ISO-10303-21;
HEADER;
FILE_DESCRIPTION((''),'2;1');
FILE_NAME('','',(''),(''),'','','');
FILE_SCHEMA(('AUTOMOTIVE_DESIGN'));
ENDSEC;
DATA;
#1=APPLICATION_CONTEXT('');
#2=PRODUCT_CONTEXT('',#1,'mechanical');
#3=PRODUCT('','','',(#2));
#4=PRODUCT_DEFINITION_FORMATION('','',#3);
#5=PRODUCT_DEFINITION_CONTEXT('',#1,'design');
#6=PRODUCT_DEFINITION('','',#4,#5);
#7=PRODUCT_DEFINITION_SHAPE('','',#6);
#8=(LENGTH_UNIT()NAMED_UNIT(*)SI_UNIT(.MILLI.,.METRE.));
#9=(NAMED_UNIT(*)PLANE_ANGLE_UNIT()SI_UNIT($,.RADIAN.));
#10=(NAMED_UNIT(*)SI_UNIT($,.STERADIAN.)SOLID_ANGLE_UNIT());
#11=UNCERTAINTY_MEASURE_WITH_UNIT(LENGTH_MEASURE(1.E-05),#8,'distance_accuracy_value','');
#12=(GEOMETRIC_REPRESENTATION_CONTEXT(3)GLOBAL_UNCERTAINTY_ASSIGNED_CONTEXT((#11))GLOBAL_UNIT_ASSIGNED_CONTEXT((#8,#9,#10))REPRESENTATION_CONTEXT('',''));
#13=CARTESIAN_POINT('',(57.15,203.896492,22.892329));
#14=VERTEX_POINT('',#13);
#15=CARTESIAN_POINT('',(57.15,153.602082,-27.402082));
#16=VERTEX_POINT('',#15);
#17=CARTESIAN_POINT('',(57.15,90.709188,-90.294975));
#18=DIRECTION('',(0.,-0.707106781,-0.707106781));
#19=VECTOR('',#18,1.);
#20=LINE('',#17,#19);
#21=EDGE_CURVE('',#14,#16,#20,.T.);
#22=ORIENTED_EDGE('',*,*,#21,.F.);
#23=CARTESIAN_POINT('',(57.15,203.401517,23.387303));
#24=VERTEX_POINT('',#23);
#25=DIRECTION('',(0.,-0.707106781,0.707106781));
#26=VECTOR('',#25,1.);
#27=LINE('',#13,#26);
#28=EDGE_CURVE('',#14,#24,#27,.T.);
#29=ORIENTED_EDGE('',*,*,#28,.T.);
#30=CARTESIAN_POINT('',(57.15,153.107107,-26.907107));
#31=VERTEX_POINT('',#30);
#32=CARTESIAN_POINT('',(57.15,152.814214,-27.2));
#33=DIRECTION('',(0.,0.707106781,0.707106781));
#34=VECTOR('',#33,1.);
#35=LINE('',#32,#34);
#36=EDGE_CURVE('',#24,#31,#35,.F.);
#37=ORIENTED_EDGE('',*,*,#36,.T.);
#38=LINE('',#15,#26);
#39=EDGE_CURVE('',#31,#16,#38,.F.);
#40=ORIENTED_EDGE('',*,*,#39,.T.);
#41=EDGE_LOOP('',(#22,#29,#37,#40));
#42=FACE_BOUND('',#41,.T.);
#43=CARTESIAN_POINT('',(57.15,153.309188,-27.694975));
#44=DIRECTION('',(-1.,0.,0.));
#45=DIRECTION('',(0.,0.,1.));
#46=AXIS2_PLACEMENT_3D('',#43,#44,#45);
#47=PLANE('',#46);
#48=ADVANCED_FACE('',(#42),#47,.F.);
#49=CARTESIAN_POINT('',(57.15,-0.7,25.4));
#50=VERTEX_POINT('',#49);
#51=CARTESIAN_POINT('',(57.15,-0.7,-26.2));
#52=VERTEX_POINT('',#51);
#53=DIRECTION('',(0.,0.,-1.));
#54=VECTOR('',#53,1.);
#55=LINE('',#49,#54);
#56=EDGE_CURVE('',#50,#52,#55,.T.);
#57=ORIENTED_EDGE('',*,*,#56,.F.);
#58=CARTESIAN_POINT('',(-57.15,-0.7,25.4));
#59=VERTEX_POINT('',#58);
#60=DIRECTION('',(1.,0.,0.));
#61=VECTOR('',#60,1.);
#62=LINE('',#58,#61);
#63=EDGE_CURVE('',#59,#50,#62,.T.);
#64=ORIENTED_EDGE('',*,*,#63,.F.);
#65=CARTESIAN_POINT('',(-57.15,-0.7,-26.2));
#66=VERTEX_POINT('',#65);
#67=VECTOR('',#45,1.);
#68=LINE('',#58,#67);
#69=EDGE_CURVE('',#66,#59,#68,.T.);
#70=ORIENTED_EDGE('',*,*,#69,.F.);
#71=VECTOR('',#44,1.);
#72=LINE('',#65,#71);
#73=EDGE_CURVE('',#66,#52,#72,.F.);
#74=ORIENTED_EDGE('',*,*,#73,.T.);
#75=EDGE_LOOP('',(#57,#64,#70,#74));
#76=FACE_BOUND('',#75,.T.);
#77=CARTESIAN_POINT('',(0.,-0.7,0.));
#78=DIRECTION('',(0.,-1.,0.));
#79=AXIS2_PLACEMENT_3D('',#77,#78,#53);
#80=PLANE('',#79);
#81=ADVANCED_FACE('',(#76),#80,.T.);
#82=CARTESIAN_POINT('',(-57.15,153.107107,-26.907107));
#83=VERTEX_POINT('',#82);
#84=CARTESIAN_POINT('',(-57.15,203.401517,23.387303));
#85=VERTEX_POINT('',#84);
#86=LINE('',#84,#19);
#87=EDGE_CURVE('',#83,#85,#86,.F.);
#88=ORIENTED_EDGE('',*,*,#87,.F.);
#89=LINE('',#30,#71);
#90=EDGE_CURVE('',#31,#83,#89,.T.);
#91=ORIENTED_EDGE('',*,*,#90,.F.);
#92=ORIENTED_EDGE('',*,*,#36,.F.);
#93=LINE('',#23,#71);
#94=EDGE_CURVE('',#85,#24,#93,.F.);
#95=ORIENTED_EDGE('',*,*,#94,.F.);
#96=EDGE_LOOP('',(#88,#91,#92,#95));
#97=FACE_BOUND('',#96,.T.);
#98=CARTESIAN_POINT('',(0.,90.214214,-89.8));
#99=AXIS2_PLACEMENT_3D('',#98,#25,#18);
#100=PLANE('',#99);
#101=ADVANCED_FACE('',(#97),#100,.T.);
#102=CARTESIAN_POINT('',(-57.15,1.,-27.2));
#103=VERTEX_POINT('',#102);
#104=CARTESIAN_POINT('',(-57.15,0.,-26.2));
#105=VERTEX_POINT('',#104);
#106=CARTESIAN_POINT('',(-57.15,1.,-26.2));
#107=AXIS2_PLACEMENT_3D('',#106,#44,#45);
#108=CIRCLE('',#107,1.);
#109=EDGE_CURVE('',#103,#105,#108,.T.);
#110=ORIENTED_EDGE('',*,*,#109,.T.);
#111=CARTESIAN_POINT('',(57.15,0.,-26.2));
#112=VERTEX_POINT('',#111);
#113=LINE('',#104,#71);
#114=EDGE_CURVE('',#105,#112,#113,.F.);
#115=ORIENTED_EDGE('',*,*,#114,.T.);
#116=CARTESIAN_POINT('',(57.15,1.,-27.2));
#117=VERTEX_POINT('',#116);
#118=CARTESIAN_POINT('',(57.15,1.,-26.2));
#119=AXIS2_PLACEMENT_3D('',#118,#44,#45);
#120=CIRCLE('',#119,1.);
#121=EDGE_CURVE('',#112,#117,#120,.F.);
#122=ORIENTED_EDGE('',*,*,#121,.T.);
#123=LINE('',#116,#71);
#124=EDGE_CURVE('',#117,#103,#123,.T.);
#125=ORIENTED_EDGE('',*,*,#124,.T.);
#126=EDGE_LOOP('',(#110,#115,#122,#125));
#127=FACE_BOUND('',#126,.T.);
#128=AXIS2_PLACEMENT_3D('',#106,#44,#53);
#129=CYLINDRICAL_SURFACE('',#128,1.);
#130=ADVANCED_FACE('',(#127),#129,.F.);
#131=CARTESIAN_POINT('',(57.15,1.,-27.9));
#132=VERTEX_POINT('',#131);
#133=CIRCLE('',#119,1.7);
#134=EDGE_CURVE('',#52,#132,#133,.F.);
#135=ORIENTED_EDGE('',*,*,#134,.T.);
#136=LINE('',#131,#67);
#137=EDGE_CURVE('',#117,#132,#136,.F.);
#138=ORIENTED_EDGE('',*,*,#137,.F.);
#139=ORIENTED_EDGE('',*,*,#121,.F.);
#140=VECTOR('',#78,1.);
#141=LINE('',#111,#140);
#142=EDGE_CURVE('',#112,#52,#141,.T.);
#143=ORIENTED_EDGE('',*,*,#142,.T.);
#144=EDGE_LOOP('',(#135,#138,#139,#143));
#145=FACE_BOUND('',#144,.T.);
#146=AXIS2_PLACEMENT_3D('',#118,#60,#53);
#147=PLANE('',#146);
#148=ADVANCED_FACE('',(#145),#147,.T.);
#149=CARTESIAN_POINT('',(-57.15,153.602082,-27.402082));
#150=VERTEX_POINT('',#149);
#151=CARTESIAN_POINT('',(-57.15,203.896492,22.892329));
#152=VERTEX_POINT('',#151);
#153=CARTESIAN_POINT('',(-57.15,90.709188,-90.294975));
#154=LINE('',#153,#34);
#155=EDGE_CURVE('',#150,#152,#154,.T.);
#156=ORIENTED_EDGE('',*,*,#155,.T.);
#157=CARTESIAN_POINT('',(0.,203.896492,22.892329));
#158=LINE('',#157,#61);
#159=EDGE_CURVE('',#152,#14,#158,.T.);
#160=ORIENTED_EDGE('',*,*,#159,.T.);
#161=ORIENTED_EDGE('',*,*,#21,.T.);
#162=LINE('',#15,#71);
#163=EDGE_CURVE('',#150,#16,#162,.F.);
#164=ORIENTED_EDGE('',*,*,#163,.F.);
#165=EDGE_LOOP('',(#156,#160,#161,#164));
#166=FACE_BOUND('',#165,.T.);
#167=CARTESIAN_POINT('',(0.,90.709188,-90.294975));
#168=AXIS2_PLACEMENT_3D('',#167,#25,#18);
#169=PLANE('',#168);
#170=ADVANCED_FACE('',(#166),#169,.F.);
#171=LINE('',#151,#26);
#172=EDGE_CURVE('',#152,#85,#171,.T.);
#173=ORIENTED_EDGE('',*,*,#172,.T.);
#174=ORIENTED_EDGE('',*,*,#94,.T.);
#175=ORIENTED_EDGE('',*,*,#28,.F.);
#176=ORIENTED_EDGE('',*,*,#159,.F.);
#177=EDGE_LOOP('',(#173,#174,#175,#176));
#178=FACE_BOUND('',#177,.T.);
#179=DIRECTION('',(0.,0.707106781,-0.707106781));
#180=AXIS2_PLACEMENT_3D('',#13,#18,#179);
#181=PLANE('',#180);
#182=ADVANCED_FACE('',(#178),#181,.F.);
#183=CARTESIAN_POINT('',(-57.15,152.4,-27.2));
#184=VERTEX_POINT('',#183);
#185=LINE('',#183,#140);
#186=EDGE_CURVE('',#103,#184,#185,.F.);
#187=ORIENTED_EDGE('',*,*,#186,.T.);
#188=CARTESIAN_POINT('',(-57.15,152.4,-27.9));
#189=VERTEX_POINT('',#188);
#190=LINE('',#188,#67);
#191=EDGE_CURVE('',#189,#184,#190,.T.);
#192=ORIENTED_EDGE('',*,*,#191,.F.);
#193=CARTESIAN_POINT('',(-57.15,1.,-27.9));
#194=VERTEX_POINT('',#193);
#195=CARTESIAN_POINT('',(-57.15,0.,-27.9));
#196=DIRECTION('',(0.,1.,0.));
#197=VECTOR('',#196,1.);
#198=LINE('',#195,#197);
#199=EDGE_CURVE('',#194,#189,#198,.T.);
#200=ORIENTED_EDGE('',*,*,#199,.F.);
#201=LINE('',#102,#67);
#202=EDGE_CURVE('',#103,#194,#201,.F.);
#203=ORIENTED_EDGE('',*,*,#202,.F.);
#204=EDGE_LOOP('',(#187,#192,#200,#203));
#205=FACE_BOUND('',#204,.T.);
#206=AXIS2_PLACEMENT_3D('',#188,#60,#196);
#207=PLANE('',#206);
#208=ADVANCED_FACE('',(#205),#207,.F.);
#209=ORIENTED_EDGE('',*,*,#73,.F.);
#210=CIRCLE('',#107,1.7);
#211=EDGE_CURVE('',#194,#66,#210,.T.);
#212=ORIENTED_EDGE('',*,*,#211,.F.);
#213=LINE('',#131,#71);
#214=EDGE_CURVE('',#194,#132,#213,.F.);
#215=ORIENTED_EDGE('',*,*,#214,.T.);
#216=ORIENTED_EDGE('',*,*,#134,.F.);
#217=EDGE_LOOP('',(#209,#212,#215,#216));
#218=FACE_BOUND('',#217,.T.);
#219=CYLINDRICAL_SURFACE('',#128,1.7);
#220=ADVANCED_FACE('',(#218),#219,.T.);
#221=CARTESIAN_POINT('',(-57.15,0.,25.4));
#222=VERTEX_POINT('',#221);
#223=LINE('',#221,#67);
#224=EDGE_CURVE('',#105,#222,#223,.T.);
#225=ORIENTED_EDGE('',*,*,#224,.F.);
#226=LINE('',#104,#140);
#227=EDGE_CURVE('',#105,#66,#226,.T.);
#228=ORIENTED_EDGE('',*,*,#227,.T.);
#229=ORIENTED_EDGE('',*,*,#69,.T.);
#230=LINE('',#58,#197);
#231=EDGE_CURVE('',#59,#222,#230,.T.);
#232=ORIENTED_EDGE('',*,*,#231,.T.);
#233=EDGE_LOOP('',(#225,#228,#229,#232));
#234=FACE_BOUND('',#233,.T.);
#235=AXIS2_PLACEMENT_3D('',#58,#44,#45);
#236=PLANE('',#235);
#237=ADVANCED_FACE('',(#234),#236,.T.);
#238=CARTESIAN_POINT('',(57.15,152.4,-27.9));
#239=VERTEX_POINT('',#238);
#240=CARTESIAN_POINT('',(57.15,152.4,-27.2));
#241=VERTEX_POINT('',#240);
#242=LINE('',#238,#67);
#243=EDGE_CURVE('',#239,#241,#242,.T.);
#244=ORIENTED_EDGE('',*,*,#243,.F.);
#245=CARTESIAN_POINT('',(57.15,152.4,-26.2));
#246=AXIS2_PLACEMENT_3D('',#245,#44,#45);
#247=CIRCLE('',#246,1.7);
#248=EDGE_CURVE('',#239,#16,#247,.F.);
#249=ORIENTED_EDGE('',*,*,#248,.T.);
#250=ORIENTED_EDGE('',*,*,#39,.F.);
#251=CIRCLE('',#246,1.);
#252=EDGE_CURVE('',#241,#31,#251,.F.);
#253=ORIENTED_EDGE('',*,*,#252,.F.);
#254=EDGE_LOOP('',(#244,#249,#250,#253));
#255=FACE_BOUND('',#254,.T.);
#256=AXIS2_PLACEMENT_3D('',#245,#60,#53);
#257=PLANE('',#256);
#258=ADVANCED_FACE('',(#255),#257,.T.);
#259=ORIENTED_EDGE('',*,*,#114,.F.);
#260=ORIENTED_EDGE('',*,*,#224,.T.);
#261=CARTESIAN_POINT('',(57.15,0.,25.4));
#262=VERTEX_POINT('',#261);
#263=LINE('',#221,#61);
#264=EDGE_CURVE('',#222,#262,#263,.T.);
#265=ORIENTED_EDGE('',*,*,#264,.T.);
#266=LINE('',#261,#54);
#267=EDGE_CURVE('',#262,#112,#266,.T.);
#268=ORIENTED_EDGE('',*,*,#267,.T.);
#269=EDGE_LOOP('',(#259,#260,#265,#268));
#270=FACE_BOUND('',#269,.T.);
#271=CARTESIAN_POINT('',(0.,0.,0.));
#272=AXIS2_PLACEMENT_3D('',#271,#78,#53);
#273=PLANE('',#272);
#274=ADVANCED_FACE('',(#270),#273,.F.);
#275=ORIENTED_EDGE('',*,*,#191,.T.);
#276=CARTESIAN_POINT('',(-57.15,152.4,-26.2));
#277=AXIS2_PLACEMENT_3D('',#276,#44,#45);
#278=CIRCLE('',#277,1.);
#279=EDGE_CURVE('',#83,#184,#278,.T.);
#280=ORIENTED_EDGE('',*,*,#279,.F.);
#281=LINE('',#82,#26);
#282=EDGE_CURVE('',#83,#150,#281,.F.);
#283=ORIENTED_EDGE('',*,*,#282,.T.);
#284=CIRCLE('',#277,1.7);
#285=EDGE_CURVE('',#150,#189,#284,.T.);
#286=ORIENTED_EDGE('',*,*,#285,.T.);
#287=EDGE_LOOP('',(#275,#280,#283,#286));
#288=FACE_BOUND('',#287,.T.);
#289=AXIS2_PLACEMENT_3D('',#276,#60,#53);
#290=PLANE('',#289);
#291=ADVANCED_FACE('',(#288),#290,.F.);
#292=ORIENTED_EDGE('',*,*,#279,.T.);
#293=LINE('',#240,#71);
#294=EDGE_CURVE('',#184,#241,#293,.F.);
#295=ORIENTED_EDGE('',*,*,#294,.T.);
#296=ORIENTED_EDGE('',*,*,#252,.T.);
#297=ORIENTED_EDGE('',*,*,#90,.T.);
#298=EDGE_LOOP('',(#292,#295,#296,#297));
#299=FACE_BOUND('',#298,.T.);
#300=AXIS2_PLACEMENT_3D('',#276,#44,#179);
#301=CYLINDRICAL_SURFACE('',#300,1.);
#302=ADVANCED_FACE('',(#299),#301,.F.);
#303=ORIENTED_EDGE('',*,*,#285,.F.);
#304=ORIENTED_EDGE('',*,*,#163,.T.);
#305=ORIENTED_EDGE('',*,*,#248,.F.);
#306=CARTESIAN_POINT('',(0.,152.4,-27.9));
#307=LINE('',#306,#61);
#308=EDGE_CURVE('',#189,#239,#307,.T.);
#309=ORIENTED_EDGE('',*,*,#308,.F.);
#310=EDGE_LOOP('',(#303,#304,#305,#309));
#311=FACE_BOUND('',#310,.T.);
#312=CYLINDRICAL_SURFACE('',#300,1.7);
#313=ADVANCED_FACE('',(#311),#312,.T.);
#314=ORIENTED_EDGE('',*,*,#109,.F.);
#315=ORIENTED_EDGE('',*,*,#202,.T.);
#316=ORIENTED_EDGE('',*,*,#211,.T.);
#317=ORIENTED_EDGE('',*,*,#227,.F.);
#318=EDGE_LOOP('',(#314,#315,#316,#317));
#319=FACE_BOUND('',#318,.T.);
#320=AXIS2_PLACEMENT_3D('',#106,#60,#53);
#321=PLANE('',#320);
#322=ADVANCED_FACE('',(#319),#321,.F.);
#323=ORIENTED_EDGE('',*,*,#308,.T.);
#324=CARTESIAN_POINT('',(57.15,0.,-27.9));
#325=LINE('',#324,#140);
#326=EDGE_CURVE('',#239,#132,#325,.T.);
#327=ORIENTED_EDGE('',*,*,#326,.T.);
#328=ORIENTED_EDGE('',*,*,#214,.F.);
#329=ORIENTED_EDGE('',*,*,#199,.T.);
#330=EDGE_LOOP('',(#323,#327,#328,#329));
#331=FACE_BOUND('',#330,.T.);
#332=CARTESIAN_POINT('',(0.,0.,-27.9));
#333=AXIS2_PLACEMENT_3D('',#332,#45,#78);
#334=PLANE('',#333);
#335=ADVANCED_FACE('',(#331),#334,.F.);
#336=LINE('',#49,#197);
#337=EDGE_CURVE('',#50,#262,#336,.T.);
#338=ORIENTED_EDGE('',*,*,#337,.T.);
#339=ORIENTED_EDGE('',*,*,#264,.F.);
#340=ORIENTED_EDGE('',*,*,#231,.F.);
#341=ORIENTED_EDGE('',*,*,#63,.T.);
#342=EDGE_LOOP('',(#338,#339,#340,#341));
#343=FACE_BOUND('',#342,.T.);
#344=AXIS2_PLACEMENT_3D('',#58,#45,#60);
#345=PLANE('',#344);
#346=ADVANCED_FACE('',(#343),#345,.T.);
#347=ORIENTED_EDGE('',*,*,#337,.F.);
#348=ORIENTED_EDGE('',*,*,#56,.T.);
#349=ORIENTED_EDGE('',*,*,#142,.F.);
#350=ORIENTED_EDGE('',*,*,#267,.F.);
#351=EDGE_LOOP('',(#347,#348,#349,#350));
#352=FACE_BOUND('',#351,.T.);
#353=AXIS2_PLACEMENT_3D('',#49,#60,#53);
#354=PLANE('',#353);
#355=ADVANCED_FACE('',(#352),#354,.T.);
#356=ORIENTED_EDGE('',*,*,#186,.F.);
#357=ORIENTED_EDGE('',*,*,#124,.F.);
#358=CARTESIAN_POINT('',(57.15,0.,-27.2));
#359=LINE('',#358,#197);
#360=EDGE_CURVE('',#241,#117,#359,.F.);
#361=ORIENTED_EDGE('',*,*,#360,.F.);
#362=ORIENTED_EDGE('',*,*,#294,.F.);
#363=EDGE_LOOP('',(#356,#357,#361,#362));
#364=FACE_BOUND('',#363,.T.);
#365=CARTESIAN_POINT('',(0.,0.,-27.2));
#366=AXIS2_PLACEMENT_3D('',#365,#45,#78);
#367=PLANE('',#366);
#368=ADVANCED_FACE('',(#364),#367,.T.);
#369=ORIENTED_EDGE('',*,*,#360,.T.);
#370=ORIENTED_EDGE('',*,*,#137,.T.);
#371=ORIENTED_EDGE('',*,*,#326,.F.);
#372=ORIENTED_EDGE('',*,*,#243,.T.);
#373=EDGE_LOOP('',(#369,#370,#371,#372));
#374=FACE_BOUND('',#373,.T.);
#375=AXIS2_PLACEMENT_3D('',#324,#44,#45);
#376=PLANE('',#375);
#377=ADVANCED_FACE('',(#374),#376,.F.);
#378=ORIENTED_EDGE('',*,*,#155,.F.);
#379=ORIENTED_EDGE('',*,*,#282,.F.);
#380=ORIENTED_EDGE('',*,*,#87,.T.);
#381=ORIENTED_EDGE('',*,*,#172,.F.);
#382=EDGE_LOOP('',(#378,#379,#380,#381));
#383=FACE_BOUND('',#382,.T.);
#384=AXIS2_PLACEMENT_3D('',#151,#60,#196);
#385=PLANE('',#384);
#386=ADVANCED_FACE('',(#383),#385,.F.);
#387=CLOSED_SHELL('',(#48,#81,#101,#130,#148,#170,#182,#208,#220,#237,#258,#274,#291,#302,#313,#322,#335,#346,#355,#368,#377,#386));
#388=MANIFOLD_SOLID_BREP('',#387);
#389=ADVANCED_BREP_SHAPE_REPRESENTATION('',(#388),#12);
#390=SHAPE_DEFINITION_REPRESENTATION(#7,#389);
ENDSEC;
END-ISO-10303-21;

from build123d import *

# Parameters (mm, degrees)
SKETCH1_W          = 114.3
SKETCH1_H          = 50.8
BASE_FLANGE1_DEPTH = 0.7
EDGE_FLANGE1_DEPTH = 114.3
EDGE_FLANGE2_DEPTH = 114.3


# Sheet-metal steps are written as plain solids
with BuildPart() as part:
    # Sketch1 → Base-Flange1 (new body)
    with BuildSketch(Plane(origin=(0, 0, 0), x_dir=(1, 0, 0), z_dir=(0, 1, 0))):
        Rectangle(SKETCH1_W, SKETCH1_H)
    extrude(amount=-BASE_FLANGE1_DEPTH)

    # Edge-Flange1 section (across the edge) → Edge-Flange1 (add)
    with BuildSketch(Plane(origin=(57.15, 0, -27.2), x_dir=(0, 0, 1), z_dir=(-1, 0, 0))):
        with BuildLine():
            Line((-0.7, 1), (-0.7, 152.4))
            Line((-0.7, 152.4), (0, 152.4))
            Line((0, 152.4), (0, 1))
            ThreePointArc((0, 1), (0.292893219, 0.292893219), (1, 0))
            Line((1, 0), (1.8, 0))
            Line((1.8, 0), (1.8, -0.7))
            Line((1.8, -0.7), (1, -0.7))
            ThreePointArc((1, -0.7), (-0.202081528, -0.202081528), (-0.7, 1))
        make_face()
    extrude(amount=EDGE_FLANGE1_DEPTH)

    # Edge-Flange2 section (across the edge) → Edge-Flange2 (add)
    with BuildSketch(Plane(origin=(57.15, 152.814213562, -27.2), x_dir=(0, -0.7071067811865414, 0.7071067811865537), z_dir=(-1, 0, 0))):
        with BuildLine():
            Line((-0.7, 0.414213562), (-0.7, 71.541250506))
            Line((-0.7, 71.541250506), (0, 71.541250506))
            Line((0, 71.541250506), (0, 0.414213562))
            ThreePointArc((0, 0.414213562), (0.076120467, 0.03153013), (0.292893219, -0.292893219))
            Line((0.292893219, -0.292893219), (-0.202081528, -0.787867966))
            ThreePointArc((-0.202081528, -0.787867966), (-0.570595205, -0.236348273), (-0.7, 0.414213562))
        make_face()
    extrude(amount=EDGE_FLANGE2_DEPTH)


solid = part.part
